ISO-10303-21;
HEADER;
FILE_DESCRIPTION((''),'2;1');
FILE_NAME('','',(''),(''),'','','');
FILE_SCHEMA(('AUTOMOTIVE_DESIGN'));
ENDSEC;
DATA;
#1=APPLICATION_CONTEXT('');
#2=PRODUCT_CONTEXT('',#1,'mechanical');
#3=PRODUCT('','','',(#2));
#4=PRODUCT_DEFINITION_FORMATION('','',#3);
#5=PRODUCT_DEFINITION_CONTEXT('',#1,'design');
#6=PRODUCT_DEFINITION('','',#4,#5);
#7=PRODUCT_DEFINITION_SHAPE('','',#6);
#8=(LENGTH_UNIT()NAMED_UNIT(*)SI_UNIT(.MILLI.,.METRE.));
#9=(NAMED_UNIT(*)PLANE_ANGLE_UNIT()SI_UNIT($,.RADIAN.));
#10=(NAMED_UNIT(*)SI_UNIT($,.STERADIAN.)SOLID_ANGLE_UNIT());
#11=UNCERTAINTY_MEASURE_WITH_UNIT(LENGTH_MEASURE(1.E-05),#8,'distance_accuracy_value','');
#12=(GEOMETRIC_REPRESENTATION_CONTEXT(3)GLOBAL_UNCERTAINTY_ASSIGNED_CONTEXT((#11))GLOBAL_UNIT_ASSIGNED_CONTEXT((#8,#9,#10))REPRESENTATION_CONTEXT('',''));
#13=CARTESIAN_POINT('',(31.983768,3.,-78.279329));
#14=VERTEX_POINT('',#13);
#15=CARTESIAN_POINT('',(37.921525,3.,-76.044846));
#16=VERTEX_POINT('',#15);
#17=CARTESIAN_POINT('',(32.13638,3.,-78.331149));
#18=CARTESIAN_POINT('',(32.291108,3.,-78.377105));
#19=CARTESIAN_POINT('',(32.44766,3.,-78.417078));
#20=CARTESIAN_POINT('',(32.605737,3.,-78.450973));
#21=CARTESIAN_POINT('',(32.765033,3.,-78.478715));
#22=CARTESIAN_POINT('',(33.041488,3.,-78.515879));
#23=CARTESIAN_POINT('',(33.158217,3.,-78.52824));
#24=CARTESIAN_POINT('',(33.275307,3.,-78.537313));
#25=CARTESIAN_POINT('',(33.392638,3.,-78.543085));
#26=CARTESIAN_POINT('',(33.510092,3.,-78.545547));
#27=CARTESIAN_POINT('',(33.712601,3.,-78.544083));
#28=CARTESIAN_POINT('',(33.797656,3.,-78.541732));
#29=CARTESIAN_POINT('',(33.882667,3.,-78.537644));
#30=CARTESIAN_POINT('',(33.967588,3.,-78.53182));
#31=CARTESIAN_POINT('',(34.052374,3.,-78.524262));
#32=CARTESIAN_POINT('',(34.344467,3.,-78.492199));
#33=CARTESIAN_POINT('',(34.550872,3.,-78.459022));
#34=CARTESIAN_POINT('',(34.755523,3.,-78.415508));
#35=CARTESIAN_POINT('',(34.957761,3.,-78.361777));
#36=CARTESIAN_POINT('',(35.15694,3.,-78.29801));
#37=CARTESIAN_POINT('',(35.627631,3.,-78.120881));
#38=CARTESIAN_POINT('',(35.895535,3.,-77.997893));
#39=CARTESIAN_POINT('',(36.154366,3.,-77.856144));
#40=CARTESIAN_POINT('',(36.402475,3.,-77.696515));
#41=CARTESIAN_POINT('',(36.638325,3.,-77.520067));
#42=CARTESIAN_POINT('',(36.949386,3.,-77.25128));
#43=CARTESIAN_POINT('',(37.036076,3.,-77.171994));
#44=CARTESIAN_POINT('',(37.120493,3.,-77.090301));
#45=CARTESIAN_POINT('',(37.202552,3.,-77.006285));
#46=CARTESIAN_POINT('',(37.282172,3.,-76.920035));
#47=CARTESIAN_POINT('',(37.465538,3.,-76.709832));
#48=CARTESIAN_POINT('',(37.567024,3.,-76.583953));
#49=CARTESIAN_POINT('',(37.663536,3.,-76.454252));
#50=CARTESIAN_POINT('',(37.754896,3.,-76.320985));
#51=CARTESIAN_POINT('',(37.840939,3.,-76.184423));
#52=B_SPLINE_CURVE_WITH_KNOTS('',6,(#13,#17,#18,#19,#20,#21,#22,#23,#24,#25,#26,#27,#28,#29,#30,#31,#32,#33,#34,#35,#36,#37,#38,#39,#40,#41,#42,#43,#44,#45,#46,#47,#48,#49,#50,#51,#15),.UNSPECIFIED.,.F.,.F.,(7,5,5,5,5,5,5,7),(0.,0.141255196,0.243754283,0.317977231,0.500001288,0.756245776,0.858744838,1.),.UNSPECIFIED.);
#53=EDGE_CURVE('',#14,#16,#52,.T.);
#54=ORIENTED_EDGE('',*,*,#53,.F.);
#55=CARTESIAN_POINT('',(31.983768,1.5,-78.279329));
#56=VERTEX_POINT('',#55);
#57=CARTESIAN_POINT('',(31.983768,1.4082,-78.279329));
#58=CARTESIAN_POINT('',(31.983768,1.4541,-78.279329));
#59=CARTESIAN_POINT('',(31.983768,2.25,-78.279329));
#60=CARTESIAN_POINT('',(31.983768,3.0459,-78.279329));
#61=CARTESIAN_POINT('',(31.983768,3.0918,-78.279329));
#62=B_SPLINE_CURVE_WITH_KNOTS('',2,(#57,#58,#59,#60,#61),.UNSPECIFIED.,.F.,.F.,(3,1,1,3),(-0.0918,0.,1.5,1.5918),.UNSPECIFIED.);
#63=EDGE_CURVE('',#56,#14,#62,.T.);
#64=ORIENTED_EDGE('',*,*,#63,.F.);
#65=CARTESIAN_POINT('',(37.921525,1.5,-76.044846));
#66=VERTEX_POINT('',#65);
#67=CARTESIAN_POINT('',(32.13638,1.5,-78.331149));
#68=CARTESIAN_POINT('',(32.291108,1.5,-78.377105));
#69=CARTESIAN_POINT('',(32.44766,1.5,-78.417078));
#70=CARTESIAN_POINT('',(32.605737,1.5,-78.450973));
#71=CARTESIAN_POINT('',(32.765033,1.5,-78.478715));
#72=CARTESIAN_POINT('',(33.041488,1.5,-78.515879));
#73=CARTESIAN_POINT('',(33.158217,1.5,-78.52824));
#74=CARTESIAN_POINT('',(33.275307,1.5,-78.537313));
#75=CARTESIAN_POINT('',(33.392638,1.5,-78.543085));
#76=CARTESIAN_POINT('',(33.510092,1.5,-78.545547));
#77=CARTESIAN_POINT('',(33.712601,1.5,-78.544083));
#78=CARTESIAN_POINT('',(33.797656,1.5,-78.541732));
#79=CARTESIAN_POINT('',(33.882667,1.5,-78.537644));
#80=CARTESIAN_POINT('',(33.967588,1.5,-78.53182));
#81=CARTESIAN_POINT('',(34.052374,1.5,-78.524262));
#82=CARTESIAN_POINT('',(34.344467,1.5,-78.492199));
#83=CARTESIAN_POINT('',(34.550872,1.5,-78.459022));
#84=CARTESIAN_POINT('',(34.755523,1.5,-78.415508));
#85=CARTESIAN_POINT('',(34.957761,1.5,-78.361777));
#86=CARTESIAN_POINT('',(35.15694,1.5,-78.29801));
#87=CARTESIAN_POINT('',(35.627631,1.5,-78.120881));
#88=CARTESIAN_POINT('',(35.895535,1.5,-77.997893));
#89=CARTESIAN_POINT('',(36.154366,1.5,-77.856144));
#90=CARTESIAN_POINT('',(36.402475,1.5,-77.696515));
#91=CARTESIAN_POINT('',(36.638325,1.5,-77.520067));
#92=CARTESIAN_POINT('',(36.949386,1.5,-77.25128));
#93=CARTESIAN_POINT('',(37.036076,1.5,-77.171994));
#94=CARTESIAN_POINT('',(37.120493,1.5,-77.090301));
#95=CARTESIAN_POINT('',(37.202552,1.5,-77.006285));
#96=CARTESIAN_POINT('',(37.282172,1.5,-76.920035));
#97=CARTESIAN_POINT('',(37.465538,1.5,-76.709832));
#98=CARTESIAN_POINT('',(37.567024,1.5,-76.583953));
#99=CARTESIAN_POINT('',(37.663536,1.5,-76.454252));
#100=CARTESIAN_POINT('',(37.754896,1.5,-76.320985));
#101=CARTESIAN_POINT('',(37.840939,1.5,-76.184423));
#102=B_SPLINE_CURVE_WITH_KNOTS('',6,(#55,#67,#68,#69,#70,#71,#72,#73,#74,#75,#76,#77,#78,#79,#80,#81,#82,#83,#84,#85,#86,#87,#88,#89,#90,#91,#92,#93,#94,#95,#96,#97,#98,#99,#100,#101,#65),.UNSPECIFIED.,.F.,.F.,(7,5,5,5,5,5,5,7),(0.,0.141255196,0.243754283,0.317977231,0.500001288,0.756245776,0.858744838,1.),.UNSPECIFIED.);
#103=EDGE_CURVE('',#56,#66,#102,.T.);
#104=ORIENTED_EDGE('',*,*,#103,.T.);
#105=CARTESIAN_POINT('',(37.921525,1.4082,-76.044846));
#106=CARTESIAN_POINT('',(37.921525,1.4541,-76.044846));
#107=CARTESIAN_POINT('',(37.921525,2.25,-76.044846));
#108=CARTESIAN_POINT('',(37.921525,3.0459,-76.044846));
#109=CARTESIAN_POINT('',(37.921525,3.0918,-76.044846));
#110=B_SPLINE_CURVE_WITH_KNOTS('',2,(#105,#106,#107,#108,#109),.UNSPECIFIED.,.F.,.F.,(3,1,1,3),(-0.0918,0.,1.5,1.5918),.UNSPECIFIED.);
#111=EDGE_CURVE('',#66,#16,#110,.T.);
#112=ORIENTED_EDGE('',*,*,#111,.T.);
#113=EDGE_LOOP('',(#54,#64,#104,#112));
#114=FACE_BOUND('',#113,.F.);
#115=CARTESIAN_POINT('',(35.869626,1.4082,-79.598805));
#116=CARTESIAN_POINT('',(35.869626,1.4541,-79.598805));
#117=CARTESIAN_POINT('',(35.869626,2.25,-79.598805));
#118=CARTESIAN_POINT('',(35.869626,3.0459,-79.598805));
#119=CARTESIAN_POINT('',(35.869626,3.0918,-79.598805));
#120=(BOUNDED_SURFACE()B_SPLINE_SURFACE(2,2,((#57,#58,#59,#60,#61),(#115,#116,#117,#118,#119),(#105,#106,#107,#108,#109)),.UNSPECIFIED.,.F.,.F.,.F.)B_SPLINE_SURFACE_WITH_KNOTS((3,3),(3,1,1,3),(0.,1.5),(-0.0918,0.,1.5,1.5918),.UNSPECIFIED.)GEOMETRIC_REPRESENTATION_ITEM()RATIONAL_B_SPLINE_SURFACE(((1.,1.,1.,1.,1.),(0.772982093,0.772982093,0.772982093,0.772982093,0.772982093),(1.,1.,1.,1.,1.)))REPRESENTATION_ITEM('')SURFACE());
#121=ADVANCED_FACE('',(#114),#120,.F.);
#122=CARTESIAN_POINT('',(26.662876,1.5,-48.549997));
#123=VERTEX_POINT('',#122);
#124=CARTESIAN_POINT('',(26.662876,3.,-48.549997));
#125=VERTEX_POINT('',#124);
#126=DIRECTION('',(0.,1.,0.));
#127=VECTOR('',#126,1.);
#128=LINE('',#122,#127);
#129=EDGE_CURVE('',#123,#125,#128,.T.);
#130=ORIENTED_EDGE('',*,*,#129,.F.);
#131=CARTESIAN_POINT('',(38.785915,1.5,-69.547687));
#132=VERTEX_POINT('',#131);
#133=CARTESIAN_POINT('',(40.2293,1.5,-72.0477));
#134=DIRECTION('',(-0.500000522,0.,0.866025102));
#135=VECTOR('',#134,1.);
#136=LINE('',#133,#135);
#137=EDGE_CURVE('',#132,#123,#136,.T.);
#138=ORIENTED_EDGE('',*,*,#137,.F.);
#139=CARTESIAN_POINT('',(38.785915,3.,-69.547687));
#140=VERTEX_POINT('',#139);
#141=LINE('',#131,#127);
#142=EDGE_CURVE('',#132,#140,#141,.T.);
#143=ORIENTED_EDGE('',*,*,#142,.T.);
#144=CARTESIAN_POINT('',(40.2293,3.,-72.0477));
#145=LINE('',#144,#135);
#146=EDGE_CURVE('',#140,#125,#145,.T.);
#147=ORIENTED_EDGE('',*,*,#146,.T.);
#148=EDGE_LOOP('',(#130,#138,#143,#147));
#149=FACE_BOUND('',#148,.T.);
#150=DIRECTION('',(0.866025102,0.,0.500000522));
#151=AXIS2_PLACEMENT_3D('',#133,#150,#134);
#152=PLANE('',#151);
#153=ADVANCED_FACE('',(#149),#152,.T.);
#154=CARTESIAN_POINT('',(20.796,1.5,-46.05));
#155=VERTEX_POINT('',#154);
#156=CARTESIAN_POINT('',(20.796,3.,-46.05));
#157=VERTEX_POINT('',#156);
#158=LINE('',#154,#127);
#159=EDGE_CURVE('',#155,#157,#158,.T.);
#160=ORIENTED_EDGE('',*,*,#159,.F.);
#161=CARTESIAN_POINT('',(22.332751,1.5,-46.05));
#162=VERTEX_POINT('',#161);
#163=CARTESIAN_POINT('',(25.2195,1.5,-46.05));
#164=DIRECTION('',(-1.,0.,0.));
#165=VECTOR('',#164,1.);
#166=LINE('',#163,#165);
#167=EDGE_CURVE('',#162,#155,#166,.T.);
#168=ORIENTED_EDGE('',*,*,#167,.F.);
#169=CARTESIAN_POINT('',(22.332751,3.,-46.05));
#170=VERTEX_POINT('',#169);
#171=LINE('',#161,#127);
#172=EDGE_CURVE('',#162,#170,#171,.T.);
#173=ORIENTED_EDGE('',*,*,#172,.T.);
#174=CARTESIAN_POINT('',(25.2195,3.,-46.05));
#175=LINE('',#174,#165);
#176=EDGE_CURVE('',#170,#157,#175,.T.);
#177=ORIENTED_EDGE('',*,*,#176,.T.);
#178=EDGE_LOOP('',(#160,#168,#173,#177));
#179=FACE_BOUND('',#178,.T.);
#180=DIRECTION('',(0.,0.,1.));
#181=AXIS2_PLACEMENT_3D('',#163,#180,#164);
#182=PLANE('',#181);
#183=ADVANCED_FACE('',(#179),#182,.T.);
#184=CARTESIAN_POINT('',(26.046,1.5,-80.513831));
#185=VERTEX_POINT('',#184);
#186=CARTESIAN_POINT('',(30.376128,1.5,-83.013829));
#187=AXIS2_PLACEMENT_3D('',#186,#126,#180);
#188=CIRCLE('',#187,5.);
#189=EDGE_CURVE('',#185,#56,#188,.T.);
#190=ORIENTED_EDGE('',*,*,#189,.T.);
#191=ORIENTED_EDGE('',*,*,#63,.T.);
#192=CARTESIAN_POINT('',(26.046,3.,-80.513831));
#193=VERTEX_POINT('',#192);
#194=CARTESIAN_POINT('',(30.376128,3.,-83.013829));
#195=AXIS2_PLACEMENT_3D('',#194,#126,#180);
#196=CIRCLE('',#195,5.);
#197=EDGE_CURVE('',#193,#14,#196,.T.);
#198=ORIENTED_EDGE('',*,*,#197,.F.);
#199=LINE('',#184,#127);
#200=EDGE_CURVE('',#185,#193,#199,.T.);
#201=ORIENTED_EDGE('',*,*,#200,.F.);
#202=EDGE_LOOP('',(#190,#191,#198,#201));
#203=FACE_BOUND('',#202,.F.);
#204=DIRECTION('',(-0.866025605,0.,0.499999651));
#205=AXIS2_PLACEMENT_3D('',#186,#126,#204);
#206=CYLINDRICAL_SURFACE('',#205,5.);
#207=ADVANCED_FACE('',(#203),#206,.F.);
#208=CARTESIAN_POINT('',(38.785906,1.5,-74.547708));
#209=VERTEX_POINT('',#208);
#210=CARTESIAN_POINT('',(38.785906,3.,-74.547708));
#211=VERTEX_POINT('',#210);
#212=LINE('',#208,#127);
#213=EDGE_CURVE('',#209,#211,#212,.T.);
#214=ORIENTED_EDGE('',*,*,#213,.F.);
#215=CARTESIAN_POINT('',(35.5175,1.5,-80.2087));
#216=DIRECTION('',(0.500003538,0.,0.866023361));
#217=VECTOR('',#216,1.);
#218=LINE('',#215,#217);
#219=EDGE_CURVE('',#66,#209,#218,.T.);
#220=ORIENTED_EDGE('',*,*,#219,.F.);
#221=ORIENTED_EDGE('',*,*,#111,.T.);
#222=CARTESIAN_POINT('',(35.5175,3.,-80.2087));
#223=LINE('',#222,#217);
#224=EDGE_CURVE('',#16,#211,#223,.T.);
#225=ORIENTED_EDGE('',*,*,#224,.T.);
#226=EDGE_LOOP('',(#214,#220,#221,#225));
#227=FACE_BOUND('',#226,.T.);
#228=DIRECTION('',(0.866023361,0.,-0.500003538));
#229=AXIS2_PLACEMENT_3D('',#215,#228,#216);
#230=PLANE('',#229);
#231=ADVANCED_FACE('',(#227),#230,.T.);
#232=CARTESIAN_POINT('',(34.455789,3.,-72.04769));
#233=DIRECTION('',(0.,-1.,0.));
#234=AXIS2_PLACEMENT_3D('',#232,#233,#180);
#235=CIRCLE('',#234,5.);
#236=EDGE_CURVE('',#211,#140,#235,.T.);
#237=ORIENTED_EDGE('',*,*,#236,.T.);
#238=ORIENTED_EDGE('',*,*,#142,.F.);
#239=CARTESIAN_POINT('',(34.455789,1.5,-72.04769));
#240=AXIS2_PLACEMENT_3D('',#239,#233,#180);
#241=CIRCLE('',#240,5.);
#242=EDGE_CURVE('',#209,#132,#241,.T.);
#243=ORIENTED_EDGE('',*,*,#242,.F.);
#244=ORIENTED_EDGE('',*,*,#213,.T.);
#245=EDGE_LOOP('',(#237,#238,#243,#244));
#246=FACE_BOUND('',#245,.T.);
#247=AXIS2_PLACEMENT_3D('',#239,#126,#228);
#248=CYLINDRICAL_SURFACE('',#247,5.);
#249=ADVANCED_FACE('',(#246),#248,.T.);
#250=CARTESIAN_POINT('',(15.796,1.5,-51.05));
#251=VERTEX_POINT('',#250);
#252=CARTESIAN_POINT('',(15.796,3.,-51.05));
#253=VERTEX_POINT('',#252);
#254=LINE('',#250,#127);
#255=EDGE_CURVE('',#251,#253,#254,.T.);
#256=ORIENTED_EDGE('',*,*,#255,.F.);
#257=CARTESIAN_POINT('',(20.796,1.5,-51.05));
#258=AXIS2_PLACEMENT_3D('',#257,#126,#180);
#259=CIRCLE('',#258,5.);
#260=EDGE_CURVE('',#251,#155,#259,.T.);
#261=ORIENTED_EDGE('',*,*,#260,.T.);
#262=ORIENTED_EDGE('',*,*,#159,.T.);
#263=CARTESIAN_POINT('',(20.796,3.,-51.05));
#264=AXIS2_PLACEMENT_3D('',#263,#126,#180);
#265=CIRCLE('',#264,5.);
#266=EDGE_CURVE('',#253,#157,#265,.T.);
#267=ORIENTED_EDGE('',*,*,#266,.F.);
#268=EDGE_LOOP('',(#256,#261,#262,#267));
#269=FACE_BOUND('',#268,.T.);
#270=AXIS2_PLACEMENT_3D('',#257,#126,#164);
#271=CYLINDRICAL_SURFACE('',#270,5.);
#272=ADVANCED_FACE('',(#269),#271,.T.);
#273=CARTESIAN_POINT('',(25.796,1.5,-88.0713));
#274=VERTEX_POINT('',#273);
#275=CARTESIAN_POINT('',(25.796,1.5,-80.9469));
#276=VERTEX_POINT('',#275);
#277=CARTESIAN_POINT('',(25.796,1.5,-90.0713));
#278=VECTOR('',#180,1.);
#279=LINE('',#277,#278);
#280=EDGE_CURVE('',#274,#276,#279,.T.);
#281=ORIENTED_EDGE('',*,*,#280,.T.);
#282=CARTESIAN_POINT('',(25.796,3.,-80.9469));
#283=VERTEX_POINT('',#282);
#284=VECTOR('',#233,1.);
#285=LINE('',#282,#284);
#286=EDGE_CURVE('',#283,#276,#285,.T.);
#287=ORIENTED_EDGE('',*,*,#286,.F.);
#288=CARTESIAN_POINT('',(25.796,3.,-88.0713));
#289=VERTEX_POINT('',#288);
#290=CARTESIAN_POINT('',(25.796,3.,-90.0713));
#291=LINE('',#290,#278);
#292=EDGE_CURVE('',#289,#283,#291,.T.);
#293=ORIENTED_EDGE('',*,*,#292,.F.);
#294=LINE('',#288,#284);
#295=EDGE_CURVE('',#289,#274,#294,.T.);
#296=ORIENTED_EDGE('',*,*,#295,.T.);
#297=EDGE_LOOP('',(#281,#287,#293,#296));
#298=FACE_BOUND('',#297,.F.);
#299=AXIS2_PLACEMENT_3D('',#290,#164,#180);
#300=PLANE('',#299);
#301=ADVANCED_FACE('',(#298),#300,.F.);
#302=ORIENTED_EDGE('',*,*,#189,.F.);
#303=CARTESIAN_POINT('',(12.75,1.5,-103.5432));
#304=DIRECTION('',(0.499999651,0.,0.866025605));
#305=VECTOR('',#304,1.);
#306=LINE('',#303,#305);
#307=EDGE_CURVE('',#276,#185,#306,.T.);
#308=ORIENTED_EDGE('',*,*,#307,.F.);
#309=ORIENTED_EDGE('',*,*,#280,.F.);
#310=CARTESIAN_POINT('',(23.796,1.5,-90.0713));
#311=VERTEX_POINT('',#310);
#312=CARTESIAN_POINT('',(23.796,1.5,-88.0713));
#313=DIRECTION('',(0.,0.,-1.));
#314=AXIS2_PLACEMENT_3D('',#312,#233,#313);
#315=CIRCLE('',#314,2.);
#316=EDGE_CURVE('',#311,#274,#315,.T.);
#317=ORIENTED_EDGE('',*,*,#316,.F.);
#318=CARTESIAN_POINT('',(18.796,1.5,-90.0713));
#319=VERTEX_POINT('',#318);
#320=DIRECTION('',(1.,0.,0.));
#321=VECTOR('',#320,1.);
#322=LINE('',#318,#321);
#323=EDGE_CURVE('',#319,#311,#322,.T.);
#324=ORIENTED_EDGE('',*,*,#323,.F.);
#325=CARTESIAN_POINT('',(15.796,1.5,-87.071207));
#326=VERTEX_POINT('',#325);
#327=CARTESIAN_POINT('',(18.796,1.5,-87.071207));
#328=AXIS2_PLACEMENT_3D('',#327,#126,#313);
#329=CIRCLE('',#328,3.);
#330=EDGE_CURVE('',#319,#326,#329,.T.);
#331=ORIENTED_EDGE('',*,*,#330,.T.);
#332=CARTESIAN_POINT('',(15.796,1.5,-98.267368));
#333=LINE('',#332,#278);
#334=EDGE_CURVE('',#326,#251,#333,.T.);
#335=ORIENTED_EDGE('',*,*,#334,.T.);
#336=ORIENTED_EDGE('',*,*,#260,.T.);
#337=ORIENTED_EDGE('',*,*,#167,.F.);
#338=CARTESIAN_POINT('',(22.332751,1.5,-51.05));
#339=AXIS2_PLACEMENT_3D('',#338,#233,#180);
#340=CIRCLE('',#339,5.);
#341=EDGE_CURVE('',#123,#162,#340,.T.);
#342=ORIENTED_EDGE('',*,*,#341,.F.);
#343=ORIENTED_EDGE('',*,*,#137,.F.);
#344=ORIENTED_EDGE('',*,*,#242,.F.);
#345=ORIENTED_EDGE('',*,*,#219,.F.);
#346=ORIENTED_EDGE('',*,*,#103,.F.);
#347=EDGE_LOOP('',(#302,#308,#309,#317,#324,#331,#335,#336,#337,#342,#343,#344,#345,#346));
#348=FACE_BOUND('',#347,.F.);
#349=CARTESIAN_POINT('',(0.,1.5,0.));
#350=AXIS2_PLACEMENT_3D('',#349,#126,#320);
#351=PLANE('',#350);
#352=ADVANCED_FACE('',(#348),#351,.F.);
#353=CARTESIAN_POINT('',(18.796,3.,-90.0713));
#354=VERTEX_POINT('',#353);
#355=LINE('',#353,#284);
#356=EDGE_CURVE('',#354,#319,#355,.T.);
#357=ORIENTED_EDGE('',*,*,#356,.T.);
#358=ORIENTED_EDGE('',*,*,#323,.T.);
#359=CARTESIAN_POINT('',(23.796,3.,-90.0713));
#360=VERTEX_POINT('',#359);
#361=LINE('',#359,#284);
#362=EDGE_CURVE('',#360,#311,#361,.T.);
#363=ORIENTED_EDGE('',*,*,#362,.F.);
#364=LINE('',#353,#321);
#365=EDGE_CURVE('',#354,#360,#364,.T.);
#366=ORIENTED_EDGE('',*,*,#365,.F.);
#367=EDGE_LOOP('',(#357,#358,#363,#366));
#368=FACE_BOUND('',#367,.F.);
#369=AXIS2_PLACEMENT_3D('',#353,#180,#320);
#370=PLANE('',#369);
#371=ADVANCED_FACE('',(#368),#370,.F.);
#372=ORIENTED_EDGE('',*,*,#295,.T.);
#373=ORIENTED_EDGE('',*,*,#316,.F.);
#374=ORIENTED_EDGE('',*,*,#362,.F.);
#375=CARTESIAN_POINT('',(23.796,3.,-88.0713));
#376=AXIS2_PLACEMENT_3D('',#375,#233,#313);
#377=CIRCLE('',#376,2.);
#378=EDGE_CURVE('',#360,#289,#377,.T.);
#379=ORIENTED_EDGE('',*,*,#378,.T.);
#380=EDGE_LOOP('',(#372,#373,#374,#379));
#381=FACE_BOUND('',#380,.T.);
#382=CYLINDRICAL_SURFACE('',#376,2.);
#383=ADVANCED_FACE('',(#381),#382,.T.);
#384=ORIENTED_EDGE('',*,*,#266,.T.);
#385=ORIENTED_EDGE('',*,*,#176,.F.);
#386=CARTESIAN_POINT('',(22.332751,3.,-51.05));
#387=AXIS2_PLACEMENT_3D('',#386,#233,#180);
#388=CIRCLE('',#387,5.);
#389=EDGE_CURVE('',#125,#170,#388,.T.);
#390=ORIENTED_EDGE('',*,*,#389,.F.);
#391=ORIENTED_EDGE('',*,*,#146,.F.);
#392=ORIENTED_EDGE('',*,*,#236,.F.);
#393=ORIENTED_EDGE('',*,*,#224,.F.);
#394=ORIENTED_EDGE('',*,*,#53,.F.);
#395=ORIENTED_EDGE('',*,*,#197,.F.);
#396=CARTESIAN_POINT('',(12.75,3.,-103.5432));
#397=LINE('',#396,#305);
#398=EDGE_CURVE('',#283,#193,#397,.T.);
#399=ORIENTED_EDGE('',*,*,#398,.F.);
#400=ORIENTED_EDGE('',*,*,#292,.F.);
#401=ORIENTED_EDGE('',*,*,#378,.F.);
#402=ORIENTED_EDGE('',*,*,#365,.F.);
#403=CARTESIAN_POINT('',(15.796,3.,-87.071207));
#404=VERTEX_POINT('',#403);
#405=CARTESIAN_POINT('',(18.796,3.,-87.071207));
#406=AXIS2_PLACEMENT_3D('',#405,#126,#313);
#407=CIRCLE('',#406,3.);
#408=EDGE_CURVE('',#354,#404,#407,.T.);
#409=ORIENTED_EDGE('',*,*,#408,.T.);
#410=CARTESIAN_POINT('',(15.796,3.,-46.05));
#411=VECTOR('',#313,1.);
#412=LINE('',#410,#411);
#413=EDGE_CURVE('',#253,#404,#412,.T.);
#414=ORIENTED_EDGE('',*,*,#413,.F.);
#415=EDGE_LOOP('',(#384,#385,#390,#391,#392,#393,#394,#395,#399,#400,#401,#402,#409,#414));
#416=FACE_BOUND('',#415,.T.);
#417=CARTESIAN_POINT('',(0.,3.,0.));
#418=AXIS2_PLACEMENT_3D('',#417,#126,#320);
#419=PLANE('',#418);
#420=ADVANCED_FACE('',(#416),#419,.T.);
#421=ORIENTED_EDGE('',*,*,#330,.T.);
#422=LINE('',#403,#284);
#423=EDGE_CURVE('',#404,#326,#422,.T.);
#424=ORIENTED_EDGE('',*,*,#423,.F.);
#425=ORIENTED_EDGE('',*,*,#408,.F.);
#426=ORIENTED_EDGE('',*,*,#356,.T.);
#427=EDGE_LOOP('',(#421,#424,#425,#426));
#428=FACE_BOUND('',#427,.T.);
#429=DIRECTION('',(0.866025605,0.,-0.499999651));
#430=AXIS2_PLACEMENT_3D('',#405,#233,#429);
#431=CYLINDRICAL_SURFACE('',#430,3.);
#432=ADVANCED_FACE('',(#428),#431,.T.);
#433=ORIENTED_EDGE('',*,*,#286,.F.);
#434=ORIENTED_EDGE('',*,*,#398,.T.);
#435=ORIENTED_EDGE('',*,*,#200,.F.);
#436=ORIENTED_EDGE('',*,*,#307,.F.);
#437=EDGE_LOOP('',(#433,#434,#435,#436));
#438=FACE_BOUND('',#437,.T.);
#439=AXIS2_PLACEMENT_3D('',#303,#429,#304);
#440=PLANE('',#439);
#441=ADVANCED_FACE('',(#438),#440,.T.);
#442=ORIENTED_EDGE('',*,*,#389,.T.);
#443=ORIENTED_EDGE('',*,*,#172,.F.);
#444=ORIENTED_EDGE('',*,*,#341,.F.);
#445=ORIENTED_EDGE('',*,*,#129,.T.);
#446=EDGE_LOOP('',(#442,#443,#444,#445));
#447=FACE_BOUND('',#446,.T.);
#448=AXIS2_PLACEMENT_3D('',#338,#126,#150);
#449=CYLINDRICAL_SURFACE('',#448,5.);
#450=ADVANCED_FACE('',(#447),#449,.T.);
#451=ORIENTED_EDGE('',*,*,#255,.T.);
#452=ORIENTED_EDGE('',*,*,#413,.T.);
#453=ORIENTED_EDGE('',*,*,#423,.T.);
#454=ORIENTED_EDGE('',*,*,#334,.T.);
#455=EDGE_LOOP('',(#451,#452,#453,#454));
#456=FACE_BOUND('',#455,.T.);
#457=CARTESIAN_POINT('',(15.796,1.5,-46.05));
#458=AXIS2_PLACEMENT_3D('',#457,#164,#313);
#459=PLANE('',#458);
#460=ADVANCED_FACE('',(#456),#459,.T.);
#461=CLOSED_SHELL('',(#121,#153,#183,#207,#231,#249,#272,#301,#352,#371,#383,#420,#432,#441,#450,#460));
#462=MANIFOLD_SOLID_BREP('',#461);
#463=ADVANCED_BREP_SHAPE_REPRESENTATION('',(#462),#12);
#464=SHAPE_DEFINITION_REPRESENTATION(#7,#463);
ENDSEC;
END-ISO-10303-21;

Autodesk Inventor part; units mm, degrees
ref_plane "YZ Plane" through (0, 0, 0) normal (1, 0, 0) x (0, 1, 0)
ref_plane "XZ Plane" through (0, 0, 0) normal (0, 1, 0) x (-1, 0, 0)
ref_plane "XY Plane" through (0, 0, 0) normal (0, 0, 1) x (1, 0, 0)
sketch "スケッチ1" plane through (0, 0, 0) normal (0, 1, 0) x (-1, 0, 0)
  line L0 (75, 0) -> (105, -51.9615)
  line L1 (-75, 0) -> (-105, -51.9615)
  line L2 (0, -218.2384) -> (0, 36.3731)
  line L3 (147, 0) -> (-147, 0)
  line L4 (37.5, -27) -> (-37.5, -27)
  line L5 (105, -51.9615) -> (30, -181.8653)
  line L6 (30, -181.8653) -> (-30, -181.8653)
  line L7 (-30, -181.8653) -> (-105, -51.9615)
  line L8 (75, 0) -> (-75, 0)
  line L9 (-25.3673, -135.8894) -> (-62.8673, -70.9375)
  line L10 (25.3673, -135.8894) -> (62.8673, -70.9375)
  line L11 (-37.5, -27) -> (-27.5, -27)
  line L12 (-27.5, -27) -> (-27.5, -39)
  line L13 (-27.5, -39) -> (-37.5, -39)
  line L14 (-37.5, -39) -> (-37.5, -27)
  line L15 (37.5, -27) -> (27.5, -27)
  line L16 (27.5, -27) -> (27.5, -39)
  line L17 (27.5, -39) -> (37.5, -39)
  line L18 (37.5, -39) -> (37.5, -27)
  line L19 (0, -77.9423) -> (44.1173, -103.4134) construction
  line L20 (0, -77.9423) -> (-44.1173, -103.4134) construction
  line L21 (-44.1173, -103.4134) -> (-67.5, -116.9134) construction
  line L22 (-57.8673, -79.5977) -> (-47.475, -73.5977)
  line L23 (-52.475, -64.9375) -> (-62.8673, -70.9375)
  line L24 (-62.8673, -70.9375) -> (-57.8673, -79.5977)
  line L25 (-47.475, -73.5977) -> (-52.475, -64.9375)
  line L26 (-25.3673, -135.8894) -> (-30.3673, -127.2291)
  line L27 (-19.975, -121.2291) -> (-14.975, -129.8894)
  line L28 (-14.975, -129.8894) -> (-25.3673, -135.8894)
  line L29 (-30.3673, -127.2291) -> (-19.975, -121.2291)
  line L30 (30.3673, -127.2291) -> (19.975, -121.2291)
  line L31 (14.975, -129.8894) -> (25.3673, -135.8894)
  line L32 (25.3673, -135.8894) -> (30.3673, -127.2291)
  line L33 (19.975, -121.2291) -> (14.975, -129.8894)
  line L34 (62.8673, -70.9375) -> (57.8673, -79.5977)
  line L35 (47.475, -73.5977) -> (52.475, -64.9375)
  line L36 (52.475, -64.9375) -> (62.8673, -70.9375)
  line L37 (57.8673, -79.5977) -> (47.475, -73.5977)
  line L38 (62.8673, -70.9375) -> (37.5, -27)
  line L39 (-37.5, -27) -> (-62.8673, -70.9375)
  line L40 (-25.3673, -135.8894) -> (25.3673, -135.8894)
  line L41 (-25.3673, -135.8894) -> (-25.3673, -181.8653)
  line L42 (25.3673, -135.8894) -> (25.3673, -181.8653)
  line L43 (-25.3673, -135.8894) -> (-48.75, -149.3894)
  line L44 (25.3673, -135.8894) -> (48.75, -149.3894)
  point P0 (0, 0)
  point P1 (0, 0)
  point P2 (0, -27)
  dimension "d1" = 150
  dimension "d2" = 60
  dimension "d3" = 60
  dimension "d4" = 27
  dimension "d5" = 75
  dimension "d6" = 60
  dimension "d7" = 27
  dimension "d8" = 10
  dimension "d9" = 12
  dimension "d10" = 10
  dimension "d11" = 12
  dimension "d14" = 360
extrude "プレート1" add sketch "スケッチ1" along normal blind 1.5 contours L5 L6 L42 L44 | L4 L16 L17 L18 L38 L36 L35 L37 L10 L30 L33 L31 L40 L2 | L2 L40 L28 L27 L29 L9 L22 L25 L23 L39 L14 L13 L12 L4 | L31 L33 L30 L10 | L42 L6 L2 L40 | L2 L6 L41 L40 | L4 L18 L17 L16 | L12 L13 L14 L4 | L9 L29 L27 L28 | L41 L6 L7 L43 | L37 L35 L36 L10 | L23 L25 L22 L9
sketch "スケッチ2" plane through (0, 0, 0) normal (0, -1, 0) x (1, 0, 0)
  line L0 (23.3798, -38.55) -> (-23.3798, -38.55) projected
  line L1 (8.2, -46.6) -> (-8.2, -46.6) projected
  arc A0 (-21.1, -27) -> (-23.3798, -38.55) centre (-21.1, -33) ccw projected
  line L2 (-27.5, -27) -> (-27.5, -39) projected
  line L3 (27.5, -39) -> (27.5, -27) projected
  line L4 (-27.5, -39) -> (-27.5, -40.55)
  line L5 (-27.5, -40.55) -> (-10.2, -40.55)
  line L6 (-10.2, -40.55) -> (-10.2, -48.6)
  line L7 (-10.2, -48.6) -> (10.2, -48.6)
  line L8 (10.2, -48.6) -> (10.2, -40.55)
  line L9 (10.2, -40.55) -> (27.5, -40.55)
  line L10 (27.5, -40.55) -> (27.5, -39)
  line L11 (-37.5, -27) -> (-27.5, -27) projected
  line L12 (-37.5, -27) -> (37.5, -27) projected
  line L13 (-20.3112, -101.4469) -> (-30.5112, -83.78)
  line L14 (-27.2827, -105.4719) -> (-20.3112, -101.4469)
  line L15 (-18.6327, -120.4541) -> (-27.2827, -105.4719)
  line L16 (-19.975, -121.2291) -> (-18.6327, -120.4541)
  line L17 (-37.4827, -87.805) -> (-46.1327, -72.8227)
  line L18 (-46.1327, -72.8227) -> (-47.475, -73.5977)
  line L19 (-30.5112, -83.78) -> (-37.4827, -87.805)
  line L20 (30.5112, -83.78) -> (20.3112, -101.4469)
  line L21 (37.4827, -87.805) -> (30.5112, -83.78)
  line L22 (46.1327, -72.8227) -> (37.4827, -87.805)
  line L23 (47.475, -73.5977) -> (46.1327, -72.8227)
  line L24 (27.2827, -105.4719) -> (18.6327, -120.4541)
  line L25 (18.6327, -120.4541) -> (19.975, -121.2291)
  line L26 (20.3112, -101.4469) -> (27.2827, -105.4719)
  line L27 (-47.475, -73.5977) -> (-57.8673, -79.5977)
  line L28 (-57.8673, -79.5977) -> (-30.3673, -127.2291)
  line L29 (-30.3673, -127.2291) -> (-19.975, -121.2291)
  line L30 (19.975, -121.2291) -> (30.3673, -127.2291)
  line L31 (30.3673, -127.2291) -> (57.8673, -79.5977)
  line L32 (57.8673, -79.5977) -> (47.475, -73.5977)
  point P0 (0, 0)
  point P1 (0, -77.9423)
  point P2 (-23.0432, -100.7148)
  point P3 (-33.5673, -121.6866)
  point P4 (-22.4248, -117.8859)
  point P5 (-25.3673, -135.8894)
  point P6 (-28.3712, -118.6866)
  point P7 (-31.2432, -86.512)
  point P8 (-45.8046, -77.3909)
  point P9 (-62.8673, -70.9375)
  point P10 (31.2432, -86.512)
  point P11 (54.6673, -85.1403)
  point P12 (45.8046, -77.3909)
  point P13 (62.8673, -70.9375)
  point P14 (49.4712, -82.1403)
  point P15 (23.0432, -100.7148)
  point P16 (22.4248, -117.8859)
  point P17 (25.3673, -135.8894)
  dimension "d17" = 2
  dimension "d18" = 2
  dimension "d19" = 2
  dimension "d20" = 2
  dimension "d26" = 360
extrude "切り取り1" cut sketch "スケッチ2" against normal blind 1.5
fillet "フィレット1" radius 1.5 18 edges at (-10.2, 0.75, -48.6) (-10.2, 0.75, -40.55) (-27.5, 0.75, -40.55) (10.2, 0.75, -48.6) (10.2, 0.75, -40.55) (27.5, 0.75, -40.55) (-30.5112, 0.75, -83.78) (-46.1327, 0.75, -72.8227) (-20.3112, 0.75, -101.4469) (-27.2827, 0.75, -105.4719) (-37.4827, 0.75, -87.805) (-18.6327, 0.75, -120.4541) (20.3112, 0.75, -101.4469) (27.2827, 0.75, -105.4719) (18.6327, 0.75, -120.4541) (30.5112, 0.75, -83.78) (37.4827, 0.75, -87.805) (46.1327, 0.75, -72.8227)
sketch "スケッチ3" plane through (0, 0, 0) normal (0, -1, 0) x (1, 0, 0)
  circle A0 centre (40.9875, -45.0405) radius 1.6 projected
  circle A1 centre (48.9875, -58.8969) radius 1.6 projected
  circle A2 centre (8, -129.8894) radius 1.6 projected
  circle A3 centre (-8, -129.8894) radius 1.6 projected
  circle A4 centre (-48.9875, -58.8969) radius 1.6 projected
  circle A5 centre (-40.9875, -45.0405) radius 1.6 projected
  point P0 (0, 0)
extrude "切り取り2" cut sketch "スケッチ3" against normal blind 1.5
sketch "スケッチ4" plane through (0, 0, 0) normal (0, -1, 0) x (1, 0, 0)
  circle A0 centre (10, -176.8653) radius 1.35 projected
  circle A1 centre (21.2333, -145.0496) radius 1.6 projected
  circle A2 centre (10, -143.8894) radius 1.6 projected
  line L0 (52.75, -142.4612) -> (30, -181.8653) projected
  line L1 (52.75, -142.4612) -> (33.6974, -131.4612) projected
  line L2 (33.6974, -131.4612) -> (27.1974, -142.7195) projected
  line L3 (27.1974, -142.7195) -> (20.5635, -138.8894) projected
  line L4 (20.5635, -138.8894) -> (5, -138.8894) projected
  line L5 (5, -138.8894) -> (5, -181.8653) projected
  line L6 (30, -181.8653) -> (5, -181.8653) projected
  circle A3 centre (-10, -176.8653) radius 1.35 projected
  circle A4 centre (-21.2333, -145.0496) radius 1.6 projected
  circle A5 centre (-10, -143.8894) radius 1.6 projected
  line L7 (-12.9295, -171.4323) -> (-35.4295, -132.4612) projected
  line L8 (-30.25, -181.4323) -> (-12.9295, -171.4323) projected
  line L9 (-30, -181.8653) -> (-30.25, -181.4323) projected
  line L10 (-30, -181.8653) -> (-5, -181.8653) projected
  line L11 (-5, -181.8653) -> (-5, -138.8894) projected
  line L12 (-5, -138.8894) -> (-20.5635, -138.8894) projected
  line L13 (-20.5635, -138.8894) -> (-27.1974, -142.7195) projected
  line L14 (-33.6974, -131.4612) -> (-27.1974, -142.7195) projected
  line L15 (-35.4295, -132.4612) -> (-33.6974, -131.4612) projected
  point P0 (0, 0)
extrude "切り取り3" cut sketch "スケッチ4" against normal blind 1.5 contours A0 | A1 | A2 | A3 | A4 | A5
sketch "スケッチ5" plane through (0, 1.5, 0) normal (0, 1, 0) x (1, 0, 0)
  line L0 (-19.975, 121.2291) -> (19.975, 121.2291) projected
  line L1 (47.475, 73.5977) -> (27.5, 39) projected
  line L2 (-47.475, 73.5977) -> (-27.5, 39) projected
  point P0 (0, 0)
sketch "スケッチ6" plane through (0, 1.5, 0) normal (0, 1, 0) x (1, 0, 0)
  line L0 (-26.0855, 44.55) -> (-41.9613, 72.0477)
  line L1 (-41.9613, 72.0477) -> (-36.0186, 82.3409)
  line L2 (-36.0186, 82.3409) -> (-29.0471, 78.3159)
  line L3 (-29.0471, 78.3159) -> (-14.8471, 102.911)
  line L4 (-14.8471, 102.911) -> (-21.8186, 106.936)
  line L5 (-21.8186, 106.936) -> (-15.8758, 117.2291)
  line L6 (-15.8758, 117.2291) -> (15.8758, 117.2291)
  line L7 (15.8758, 117.2291) -> (21.8186, 106.936)
  line L8 (21.8186, 106.936) -> (14.8471, 102.911)
  line L9 (14.8471, 102.911) -> (29.0471, 78.3159)
  line L10 (29.0471, 78.3159) -> (36.0186, 82.3409)
  line L11 (36.0186, 82.3409) -> (41.9613, 72.0477)
  line L12 (41.9613, 72.0477) -> (26.0855, 44.55)
  line L13 (26.0855, 44.55) -> (14.2, 44.55)
  line L14 (14.2, 44.55) -> (14.2, 52.6)
  line L15 (14.2, 52.6) -> (-14.2, 52.6)
  line L16 (-14.2, 52.6) -> (-14.2, 44.55)
  line L17 (-14.2, 44.55) -> (-26.0855, 44.55)
  line L18 (-47.475, 73.5977) -> (-27.5, 39) projected
  line L19 (-38.2327, 86.5059) -> (-45.3827, 74.1218) projected
  line L20 (-31.8102, 84.53) -> (-36.1836, 87.055) projected
  line L21 (-21.0612, 100.1479) -> (-29.7612, 85.079) projected
  line L22 (-25.9836, 104.7219) -> (-21.6102, 102.1969) projected
  line L23 (-19.3827, 119.1551) -> (-26.5327, 106.7709) projected
  line L24 (-19.975, 121.2291) -> (19.975, 121.2291) projected
  line L25 (47.475, 73.5977) -> (27.5, 39) projected
  line L26 (26.5327, 106.7709) -> (19.3827, 119.1551) projected
  line L27 (21.6102, 102.1969) -> (25.9836, 104.7219) projected
  line L28 (29.7612, 85.079) -> (21.0612, 100.1479) projected
  line L29 (36.1836, 87.055) -> (31.8102, 84.53) projected
  line L30 (45.3827, 74.1218) -> (38.2327, 86.5059) projected
  line L31 (11.7, 40.55) -> (26, 40.55) projected
  line L32 (10.2, 47.1) -> (10.2, 42.05) projected
  line L33 (-8.7, 48.6) -> (8.7, 48.6) projected
  line L34 (-10.2, 42.05) -> (-10.2, 47.1) projected
  line L35 (-26, 40.55) -> (-11.7, 40.55) projected
  line L36 (0, 48.6) -> (0, 121.2291)
  line L37 (-25.4112, 92.6134) -> (-31.0836, 95.8884) construction
  point P0 (0, 0)
  dimension "d32" = 4
  dimension "d33" = 4
  dimension "d34" = 4
  dimension "d35" = 4
  dimension "d36" = 4
  dimension "d37" = 4
  dimension "d38" = 4
  dimension "d39" = 4
  dimension "d40" = 4
extrude "切り取り4" cut sketch "スケッチ6" against normal blind 1.5
fillet "フィレット2" radius 5 9 edges at (-14.2, 0.75, -44.55) (-26.0855, 0.75, -44.55) (-41.9613, 0.75, -72.0477) (-36.0186, 0.75, -82.3409) (-21.8186, 0.75, -106.936) (-15.8758, 0.75, -117.2291) (-14.2, 0.75, -52.6) (-29.0471, 0.75, -78.3159) (-14.8471, 0.75, -102.911)
mirror "ミラー1" about plane through (0, 0, 0) normal (1, 0, 0) of "フィレット2"
sketch "スケッチ7" plane through (0, 1.5, 0) normal (0, 1, 0) x (1, 0, 0)
  arc A0 (18.2848, 105.0066) -> (17.2511, 98.7471) centre (21.5812, 101.2471) ccw projected
  line L0 (17.2511, 98.7471) -> (26.643, 82.4797) projected
  arc A1 (26.643, 82.4797) -> (32.5808, 80.2452) centre (30.9732, 84.9797) ccw projected
  arc A2 (38.5186, 78.0107) -> (32.5808, 80.2452) centre (34.1884, 75.5107) ccw projected
  line L1 (38.5186, 78.0107) -> (40.5179, 74.5477) projected
  arc A3 (40.5179, 69.5477) -> (40.5179, 74.5477) centre (36.1878, 72.0477) ccw projected
  line L2 (40.5179, 69.5477) -> (27.5289, 47.05) projected
  arc A4 (23.1987, 44.55) -> (27.5289, 47.05) centre (23.1987, 49.55) ccw projected
  line L3 (23.1987, 44.55) -> (19.2, 44.55) projected
  arc A5 (14.296, 48.575) -> (19.2, 44.55) centre (19.2, 49.55) ccw projected
  arc A6 (14.296, 48.575) -> (9.392, 52.6) centre (9.392, 47.6) ccw projected
  line L4 (9.392, 52.6) -> (-9.392, 52.6) projected
  arc A7 (-9.392, 52.6) -> (-14.296, 48.575) centre (-9.392, 47.6) ccw projected
  arc A8 (-19.2, 44.55) -> (-14.296, 48.575) centre (-19.2, 49.55) ccw projected
  line L5 (-19.2, 44.55) -> (-23.1987, 44.55) projected
  arc A9 (-27.5289, 47.05) -> (-23.1987, 44.55) centre (-23.1987, 49.55) ccw projected
  line L6 (-27.5289, 47.05) -> (-40.5179, 69.5477) projected
  arc A10 (-40.5179, 74.5477) -> (-40.5179, 69.5477) centre (-36.1878, 72.0477) ccw projected
  line L7 (-40.5179, 74.5477) -> (-38.5186, 78.0107) projected
  arc A11 (-32.5808, 80.2452) -> (-38.5186, 78.0107) centre (-34.1884, 75.5107) ccw projected
  arc A12 (-32.5808, 80.2452) -> (-26.643, 82.4797) centre (-30.9732, 84.9797) ccw projected
  line L8 (-26.643, 82.4797) -> (-17.2511, 98.7471) projected
  arc A13 (-17.2511, 98.7471) -> (-18.2848, 105.0066) centre (-21.5812, 101.2471) ccw projected
  arc A14 (-19.3186, 111.2661) -> (-18.2848, 105.0066) centre (-14.9884, 108.7661) ccw projected
  line L9 (-19.3186, 111.2661) -> (-17.3192, 114.7291) projected
  arc A15 (-12.9891, 117.2291) -> (-17.3192, 114.7291) centre (-12.9891, 112.2291) ccw projected
  line L10 (-12.9891, 117.2291) -> (12.9891, 117.2291) projected
  arc A16 (17.3192, 114.7291) -> (12.9891, 117.2291) centre (12.9891, 112.2291) ccw projected
  line L11 (17.3192, 114.7291) -> (19.3186, 111.2661) projected
  arc A17 (18.2848, 105.0066) -> (19.3186, 111.2661) centre (14.9884, 108.7661) ccw projected
  circle A18 centre (21.2333, 145.0496) radius 1.6 projected
  circle A19 centre (-10, 143.8894) radius 1.6 projected
  circle A20 centre (-10, 176.8653) radius 1.35 projected
  circle A21 centre (-21.2333, 145.0496) radius 1.6 projected
  circle A22 centre (10, 176.8653) radius 1.35 projected
  circle A23 centre (10, 143.8894) radius 1.6 projected
  circle A24 centre (-48.9875, 58.8969) radius 1.6 projected
  circle A25 centre (8, 129.8894) radius 1.6 projected
  circle A26 centre (40.9875, 45.0405) radius 1.6 projected
  circle A27 centre (48.9875, 58.8969) radius 1.6 projected
  circle A28 centre (-8, 129.8894) radius 1.6 projected
  circle A29 centre (-40.9875, 45.0405) radius 1.6 projected
  arc A30 (38.2327, 86.5059) -> (36.1836, 87.055) centre (36.9336, 85.7559) ccw projected
  line L12 (36.1836, 87.055) -> (31.8102, 84.53) projected
  arc A31 (29.7612, 85.079) -> (31.8102, 84.53) centre (31.0602, 85.829) ccw projected
  line L13 (29.7612, 85.079) -> (21.0612, 100.1479) projected
  arc A32 (21.6102, 102.1969) -> (21.0612, 100.1479) centre (22.3602, 100.8979) ccw projected
  line L14 (21.6102, 102.1969) -> (25.9836, 104.7219) projected
  arc A33 (25.9836, 104.7219) -> (26.5327, 106.7709) centre (25.2336, 106.0209) ccw projected
  line L15 (26.5327, 106.7709) -> (19.3827, 119.1551) projected
  arc A34 (19.9317, 121.2041) -> (19.3827, 119.1551) centre (20.6817, 119.9051) ccw projected
  line L16 (19.9317, 121.2041) -> (30.3673, 127.2291) projected
  line L17 (25.3673, 135.8894) -> (30.3673, 127.2291) projected
  line L18 (48.75, 149.3894) -> (25.3673, 135.8894) projected
  line L19 (30, 181.8653) -> (48.75, 149.3894) projected
  line L20 (-30, 181.8653) -> (30, 181.8653) projected
  line L21 (-48.75, 149.3894) -> (-30, 181.8653) projected
  line L22 (-25.3673, 135.8894) -> (-48.75, 149.3894) projected
  line L23 (-30.3673, 127.2291) -> (-25.3673, 135.8894) projected
  line L24 (-30.3673, 127.2291) -> (-19.9317, 121.2041) projected
  arc A35 (-19.3827, 119.1551) -> (-19.9317, 121.2041) centre (-20.6817, 119.9051) ccw projected
  line L25 (-19.3827, 119.1551) -> (-26.5327, 106.7709) projected
  arc A36 (-26.5327, 106.7709) -> (-25.9836, 104.7219) centre (-25.2336, 106.0209) ccw projected
  line L26 (-25.9836, 104.7219) -> (-21.6102, 102.1969) projected
  arc A37 (-21.0612, 100.1479) -> (-21.6102, 102.1969) centre (-22.3602, 100.8979) ccw projected
  line L27 (-21.0612, 100.1479) -> (-29.7612, 85.079) projected
  arc A38 (-31.8102, 84.53) -> (-29.7612, 85.079) centre (-31.0602, 85.829) ccw projected
  line L28 (-31.8102, 84.53) -> (-36.1836, 87.055) projected
  arc A39 (-36.1836, 87.055) -> (-38.2327, 86.5059) centre (-36.9336, 85.7559) ccw projected
  line L29 (-38.2327, 86.5059) -> (-45.3827, 74.1218) projected
  arc A40 (-47.4317, 73.5727) -> (-45.3827, 74.1218) centre (-46.6817, 74.8718) ccw projected
  line L30 (-47.4317, 73.5727) -> (-57.8673, 79.5977) projected
  line L31 (-62.8673, 70.9375) -> (-57.8673, 79.5977) projected
  line L32 (-37.5, 27) -> (-62.8673, 70.9375) projected
  line L33 (-27.5, 27) -> (-37.5, 27) projected
  line L34 (-27.5, 27) -> (-27.5, 39.05) projected
  arc A41 (-26, 40.55) -> (-27.5, 39.05) centre (-26, 39.05) ccw projected
  line L35 (-26, 40.55) -> (-11.7, 40.55) projected
  arc A42 (-11.7, 40.55) -> (-10.2, 42.05) centre (-11.7, 42.05) ccw projected
  line L36 (-10.2, 42.05) -> (-10.2, 47.1) projected
  arc A43 (-8.7, 48.6) -> (-10.2, 47.1) centre (-8.7, 47.1) ccw projected
  line L37 (-8.7, 48.6) -> (8.7, 48.6) projected
  arc A44 (10.2, 47.1) -> (8.7, 48.6) centre (8.7, 47.1) ccw projected
  line L38 (10.2, 47.1) -> (10.2, 42.05) projected
  arc A45 (10.2, 42.05) -> (11.7, 40.55) centre (11.7, 42.05) ccw projected
  line L39 (11.7, 40.55) -> (26, 40.55) projected
  arc A46 (27.5, 39.05) -> (26, 40.55) centre (26, 39.05) ccw projected
  line L40 (27.5, 39.05) -> (27.5, 27) projected
  line L41 (37.5, 27) -> (27.5, 27) projected
  line L42 (62.8673, 70.9375) -> (37.5, 27) projected
  line L43 (57.8673, 79.5977) -> (62.8673, 70.9375) projected
  line L44 (57.8673, 79.5977) -> (47.4317, 73.5727) projected
  arc A47 (45.3827, 74.1218) -> (47.4317, 73.5727) centre (46.6817, 74.8718) ccw projected
  line L45 (45.3827, 74.1218) -> (38.2327, 86.5059) projected
  line L46 (25.2195, 46.05) -> (15.796, 46.05)
  line L47 (15.796, 46.05) -> (15.796, 54.1)
  line L48 (15.796, 54.1) -> (-15.796, 54.1)
  line L49 (-15.796, 54.1) -> (-15.796, 46.05)
  line L50 (-15.796, 46.05) -> (-25.2195, 46.05)
  line L51 (-25.2195, 46.05) -> (-40.2293, 72.0477)
  line L52 (-40.2293, 72.0477) -> (-35.5175, 80.2087)
  line L53 (-35.5175, 80.2087) -> (-28.546, 76.1837)
  line L54 (-28.546, 76.1837) -> (-12.75, 103.5432)
  line L55 (-12.75, 103.5432) -> (-19.7215, 107.5682)
  line L56 (-19.7215, 107.5682) -> (-15.0098, 115.7291)
  line L57 (-15.0098, 115.7291) -> (15.0098, 115.7291)
  line L58 (15.0098, 115.7291) -> (19.7215, 107.5682)
  line L59 (19.7215, 107.5682) -> (12.75, 103.5432)
  line L60 (12.75, 103.5432) -> (28.546, 76.1837)
  line L61 (28.546, 76.1837) -> (35.5175, 80.2087)
  line L62 (35.5175, 80.2087) -> (40.2293, 72.0477)
  line L63 (40.2293, 72.0477) -> (25.2195, 46.05)
  line L64 (0, 54.1) -> (0, 115.7291) construction
  line L65 (0, 218.2384) -> (0, -36.3731) construction
  line L66 (40.5179, 69.5477) -> (27.5289, 47.05) projected
  line L67 (20.648, 89.8634) -> (0, 77.9423) construction
  line L68 (0, 54.1) -> (0, 77.9423) construction
  line L69 (17.3192, 114.7291) -> (19.3186, 111.2661) projected
  point P0 (0, 0)
  dimension "d44" = 1.5
  dimension "d45" = 1.5
  dimension "d46" = 1.5
  dimension "d47" = 1.5
  dimension "d48" = 1.5
  dimension "d49" = 1.5
  dimension "d50" = 1.5
  dimension "d51" = 1.5
extrude "押し出し1" cut sketch "スケッチ7" against normal through all contours A0 L0 A1 A2 L1 A3 L2 A4 L3 A5 A6 L4 A7 A8 L5 A9 L6 A10 L7 A11 A12 L8 A13 A14 L9 A15 L10 A16 L11 A17 | L45 A47 L44 L43 L42 L41 L40 A46 L39 A45 L38 A44 L37 A43 L36 A42 L35 A41 L34 L33 L32 L31 L30 A40 L29 A39 L28 A38 L27 A37 L26 A36 L25 A35 L24 L23 L22 L21 L20 L19 L18 L17 L16 A34 L15 A33 L14 A32 L13 A31 L12 A30 | L46 L47 L48 L49 L50 L51 L52 L53 L54 L55 L56 L57 L58 L59 L60 L61 L62 L63
extrude "押し出し2" add sketch "スケッチ7" along normal blind 1.5 contours L46 L47 L48 L49 L50 L51 L52 L53 L54 L55 L56 L57 L58 L59 L60 L61 L62 L63
sketch "スケッチ8" plane through (0, 3, 0) normal (0, 1, 0) x (1, 0, 0)
  line L0 (15, 59.1) -> (-15, 59.1)
  line L1 (-15, 59.1) -> (-15, 124.1)
  line L2 (-15, 124.1) -> (15, 124.1)
  line L3 (15, 124.1) -> (15, 59.1)
  line L4 (-15.796, 54.1) -> (15.796, 54.1) projected
  line L5 (15.0098, 115.7291) -> (-15.0098, 115.7291) projected
  line L6 (15, 59.1) -> (15, 54.1)
  line L7 (-15.796, 46.05) -> (-15.796, 54.1) projected
  line L8 (-25.2195, 46.05) -> (-15.796, 46.05) projected
  line L9 (-40.2293, 72.0477) -> (-25.2195, 46.05) projected
  line L10 (-35.5175, 80.2087) -> (-40.2293, 72.0477) projected
  line L11 (-28.546, 76.1837) -> (-35.5175, 80.2087) projected
  line L12 (-12.75, 103.5432) -> (-28.546, 76.1837) projected
  line L13 (-19.7215, 107.5682) -> (-12.75, 103.5432) projected
  line L14 (-15.0098, 115.7291) -> (-19.7215, 107.5682) projected
  line L15 (15.796, 54.1) -> (15.796, 114.3674)
  line L16 (19.7215, 107.5682) -> (15.0098, 115.7291) projected
  line L17 (12.75, 103.5432) -> (19.7215, 107.5682) projected
  point P0 (0, 0)
  point P1 (0, 59.1)
  point P2 (0, 54.1)
  point P3 (-15, 115.7291)
  point P4 (15, 115.7291)
  point P5 (-15, 104.8422)
  point P6 (-15, 99.6461)
  point P7 (15.796, 105.3017)
  dimension "d56" = 65
  dimension "d57" = 30
  dimension "d58" = 5
extrude "押し出し3" cut sketch "スケッチ8" against normal through all
fillet "フィレット4" radius 5 5 edges at (28.546, 2.25, -76.1837) (35.5175, 2.25, -80.2087) (40.2293, 2.25, -72.0477) (25.2195, 2.25, -46.05) (15.796, 2.25, -46.05)
fillet "フィレット5" radius 3 1 edges at (15.796, 2.25, -98.2674)
sketch "スケッチ9" plane through (0, 1.5, 0) normal (0, -1, 0) x (1, 0, 0)
  line L0 (11.5, -82.5) -> (11.5, -82.525) projected
  line L1 (11.5, -82.5) -> (14.13, -82.5) projected
  arc A0 (14.13, -82.5) -> (14.18, -82.45) centre (14.13, -82.45) ccw projected
  line L2 (14.18, -82.95) -> (14.18, -82.45) projected
  arc A1 (14.18, -82.95) -> (14.13, -82.9) centre (14.13, -82.95) ccw projected
  line L3 (11.5, -82.9) -> (14.13, -82.9) projected
  line L4 (11.5, -82.875) -> (11.5, -82.9) projected
  line L5 (11.11, -82.875) -> (11.5, -82.875) projected
  arc A2 (11.0667, -82.85) -> (11.11, -82.875) centre (11.11, -82.825) ccw projected
  arc A3 (11.0667, -82.85) -> (11.0234, -82.825) centre (11.0234, -82.875) ccw projected
  line L6 (10.96, -82.825) -> (11.0234, -82.825) projected
  line L7 (10.96, -82.575) -> (10.96, -82.825) projected
  line L8 (11.0234, -82.575) -> (10.96, -82.575) projected
  arc A4 (11.0234, -82.575) -> (11.0667, -82.55) centre (11.0234, -82.525) ccw projected
  arc A5 (11.11, -82.525) -> (11.0667, -82.55) centre (11.11, -82.575) ccw projected
  line L9 (11.5, -82.525) -> (11.11, -82.525) projected
  line L10 (13.14, -82.875) -> (13.14, -82.525) projected
  line L11 (13.14, -82.875) -> (13.2786, -82.875) projected
  line L12 (13.2786, -82.875) -> (13.2786, -82.525) projected
  line L13 (13.2786, -82.525) -> (13.14, -82.525) projected
  arc A6 (15.796, -87.0713) -> (21.3941, -88.5713) centre (18.796, -87.0713) ccw projected
  point P0 (0, 0)
  point P1 (14.18, -82.7)
  dimension "d64" = 4.3713
sketch "スケッチ10" plane through (0, 3, 0) normal (0, 1, 0) x (1, 0, 0)
  arc A0 (21.3941, 88.5713) -> (15.796, 87.0713) centre (18.796, 87.0713) ccw projected
  line L0 (18.796, 90.0713) -> (25.796, 90.0713)
  line L1 (25.796, 90.0713) -> (25.796, 80.9469)
  line L2 (26.046, 80.5138) -> (21.3941, 88.5713) projected
  line L3 (15.796, 87.0713) -> (15.796, 51.05) projected
  point P0 (0, 0)
  dimension "d65" = 10
extrude "押し出し4" add sketch "スケッチ10" against normal up to surface (1.5 mm away)
fillet "フィレット6" radius 2 1 edges at (25.796, 2.25, -90.0713)
equation "\"d3\" = d2"
equation "\"d7\" = d4"
equation "\"d19\" = d18"
equation "\"d21\" = Thickness"
equation "\"d28\" = Thickness"
equation "\"d30\" = Thickness"
equation "\"d33\" = d32"
equation "\"d34\" = d32"
equation "\"d35\" = d32"
equation "\"d36\" = d32"
equation "\"d37\" = d32"
equation "\"d38\" = d32"
equation "\"d39\" = d32"
equation "\"d40\" = d32"
equation "\"d41\" = Thickness"
equation "\"d45\" = d44"
equation "\"d46\" = d44"
equation "\"d47\" = d44"
equation "\"d48\" = d44"
equation "\"d49\" = d44"
equation "\"d50\" = d44"
equation "\"d51\" = d44"
equation "\"d16\" = Thickness"
equation "\"BendRadius\" = Thickness"
equation "\"BendReliefWidth\" = Thickness"
equation "\"BendReliefDepth\" = 0.5 * Thickness"
equation "\"CornerReliefSize\" = 4 * Thickness"
equation "\"MinimumRemnant\" = 2 * Thickness"
equation "\"TransitionRadius\" = BendRadius"
equation "\"JacobiRadiusSize\" = BendRadius"
equation "\"GapSize\" = Thickness"
equation "\"Thickness\" = 1.5"
properties part number "CORE_hat_outline"
